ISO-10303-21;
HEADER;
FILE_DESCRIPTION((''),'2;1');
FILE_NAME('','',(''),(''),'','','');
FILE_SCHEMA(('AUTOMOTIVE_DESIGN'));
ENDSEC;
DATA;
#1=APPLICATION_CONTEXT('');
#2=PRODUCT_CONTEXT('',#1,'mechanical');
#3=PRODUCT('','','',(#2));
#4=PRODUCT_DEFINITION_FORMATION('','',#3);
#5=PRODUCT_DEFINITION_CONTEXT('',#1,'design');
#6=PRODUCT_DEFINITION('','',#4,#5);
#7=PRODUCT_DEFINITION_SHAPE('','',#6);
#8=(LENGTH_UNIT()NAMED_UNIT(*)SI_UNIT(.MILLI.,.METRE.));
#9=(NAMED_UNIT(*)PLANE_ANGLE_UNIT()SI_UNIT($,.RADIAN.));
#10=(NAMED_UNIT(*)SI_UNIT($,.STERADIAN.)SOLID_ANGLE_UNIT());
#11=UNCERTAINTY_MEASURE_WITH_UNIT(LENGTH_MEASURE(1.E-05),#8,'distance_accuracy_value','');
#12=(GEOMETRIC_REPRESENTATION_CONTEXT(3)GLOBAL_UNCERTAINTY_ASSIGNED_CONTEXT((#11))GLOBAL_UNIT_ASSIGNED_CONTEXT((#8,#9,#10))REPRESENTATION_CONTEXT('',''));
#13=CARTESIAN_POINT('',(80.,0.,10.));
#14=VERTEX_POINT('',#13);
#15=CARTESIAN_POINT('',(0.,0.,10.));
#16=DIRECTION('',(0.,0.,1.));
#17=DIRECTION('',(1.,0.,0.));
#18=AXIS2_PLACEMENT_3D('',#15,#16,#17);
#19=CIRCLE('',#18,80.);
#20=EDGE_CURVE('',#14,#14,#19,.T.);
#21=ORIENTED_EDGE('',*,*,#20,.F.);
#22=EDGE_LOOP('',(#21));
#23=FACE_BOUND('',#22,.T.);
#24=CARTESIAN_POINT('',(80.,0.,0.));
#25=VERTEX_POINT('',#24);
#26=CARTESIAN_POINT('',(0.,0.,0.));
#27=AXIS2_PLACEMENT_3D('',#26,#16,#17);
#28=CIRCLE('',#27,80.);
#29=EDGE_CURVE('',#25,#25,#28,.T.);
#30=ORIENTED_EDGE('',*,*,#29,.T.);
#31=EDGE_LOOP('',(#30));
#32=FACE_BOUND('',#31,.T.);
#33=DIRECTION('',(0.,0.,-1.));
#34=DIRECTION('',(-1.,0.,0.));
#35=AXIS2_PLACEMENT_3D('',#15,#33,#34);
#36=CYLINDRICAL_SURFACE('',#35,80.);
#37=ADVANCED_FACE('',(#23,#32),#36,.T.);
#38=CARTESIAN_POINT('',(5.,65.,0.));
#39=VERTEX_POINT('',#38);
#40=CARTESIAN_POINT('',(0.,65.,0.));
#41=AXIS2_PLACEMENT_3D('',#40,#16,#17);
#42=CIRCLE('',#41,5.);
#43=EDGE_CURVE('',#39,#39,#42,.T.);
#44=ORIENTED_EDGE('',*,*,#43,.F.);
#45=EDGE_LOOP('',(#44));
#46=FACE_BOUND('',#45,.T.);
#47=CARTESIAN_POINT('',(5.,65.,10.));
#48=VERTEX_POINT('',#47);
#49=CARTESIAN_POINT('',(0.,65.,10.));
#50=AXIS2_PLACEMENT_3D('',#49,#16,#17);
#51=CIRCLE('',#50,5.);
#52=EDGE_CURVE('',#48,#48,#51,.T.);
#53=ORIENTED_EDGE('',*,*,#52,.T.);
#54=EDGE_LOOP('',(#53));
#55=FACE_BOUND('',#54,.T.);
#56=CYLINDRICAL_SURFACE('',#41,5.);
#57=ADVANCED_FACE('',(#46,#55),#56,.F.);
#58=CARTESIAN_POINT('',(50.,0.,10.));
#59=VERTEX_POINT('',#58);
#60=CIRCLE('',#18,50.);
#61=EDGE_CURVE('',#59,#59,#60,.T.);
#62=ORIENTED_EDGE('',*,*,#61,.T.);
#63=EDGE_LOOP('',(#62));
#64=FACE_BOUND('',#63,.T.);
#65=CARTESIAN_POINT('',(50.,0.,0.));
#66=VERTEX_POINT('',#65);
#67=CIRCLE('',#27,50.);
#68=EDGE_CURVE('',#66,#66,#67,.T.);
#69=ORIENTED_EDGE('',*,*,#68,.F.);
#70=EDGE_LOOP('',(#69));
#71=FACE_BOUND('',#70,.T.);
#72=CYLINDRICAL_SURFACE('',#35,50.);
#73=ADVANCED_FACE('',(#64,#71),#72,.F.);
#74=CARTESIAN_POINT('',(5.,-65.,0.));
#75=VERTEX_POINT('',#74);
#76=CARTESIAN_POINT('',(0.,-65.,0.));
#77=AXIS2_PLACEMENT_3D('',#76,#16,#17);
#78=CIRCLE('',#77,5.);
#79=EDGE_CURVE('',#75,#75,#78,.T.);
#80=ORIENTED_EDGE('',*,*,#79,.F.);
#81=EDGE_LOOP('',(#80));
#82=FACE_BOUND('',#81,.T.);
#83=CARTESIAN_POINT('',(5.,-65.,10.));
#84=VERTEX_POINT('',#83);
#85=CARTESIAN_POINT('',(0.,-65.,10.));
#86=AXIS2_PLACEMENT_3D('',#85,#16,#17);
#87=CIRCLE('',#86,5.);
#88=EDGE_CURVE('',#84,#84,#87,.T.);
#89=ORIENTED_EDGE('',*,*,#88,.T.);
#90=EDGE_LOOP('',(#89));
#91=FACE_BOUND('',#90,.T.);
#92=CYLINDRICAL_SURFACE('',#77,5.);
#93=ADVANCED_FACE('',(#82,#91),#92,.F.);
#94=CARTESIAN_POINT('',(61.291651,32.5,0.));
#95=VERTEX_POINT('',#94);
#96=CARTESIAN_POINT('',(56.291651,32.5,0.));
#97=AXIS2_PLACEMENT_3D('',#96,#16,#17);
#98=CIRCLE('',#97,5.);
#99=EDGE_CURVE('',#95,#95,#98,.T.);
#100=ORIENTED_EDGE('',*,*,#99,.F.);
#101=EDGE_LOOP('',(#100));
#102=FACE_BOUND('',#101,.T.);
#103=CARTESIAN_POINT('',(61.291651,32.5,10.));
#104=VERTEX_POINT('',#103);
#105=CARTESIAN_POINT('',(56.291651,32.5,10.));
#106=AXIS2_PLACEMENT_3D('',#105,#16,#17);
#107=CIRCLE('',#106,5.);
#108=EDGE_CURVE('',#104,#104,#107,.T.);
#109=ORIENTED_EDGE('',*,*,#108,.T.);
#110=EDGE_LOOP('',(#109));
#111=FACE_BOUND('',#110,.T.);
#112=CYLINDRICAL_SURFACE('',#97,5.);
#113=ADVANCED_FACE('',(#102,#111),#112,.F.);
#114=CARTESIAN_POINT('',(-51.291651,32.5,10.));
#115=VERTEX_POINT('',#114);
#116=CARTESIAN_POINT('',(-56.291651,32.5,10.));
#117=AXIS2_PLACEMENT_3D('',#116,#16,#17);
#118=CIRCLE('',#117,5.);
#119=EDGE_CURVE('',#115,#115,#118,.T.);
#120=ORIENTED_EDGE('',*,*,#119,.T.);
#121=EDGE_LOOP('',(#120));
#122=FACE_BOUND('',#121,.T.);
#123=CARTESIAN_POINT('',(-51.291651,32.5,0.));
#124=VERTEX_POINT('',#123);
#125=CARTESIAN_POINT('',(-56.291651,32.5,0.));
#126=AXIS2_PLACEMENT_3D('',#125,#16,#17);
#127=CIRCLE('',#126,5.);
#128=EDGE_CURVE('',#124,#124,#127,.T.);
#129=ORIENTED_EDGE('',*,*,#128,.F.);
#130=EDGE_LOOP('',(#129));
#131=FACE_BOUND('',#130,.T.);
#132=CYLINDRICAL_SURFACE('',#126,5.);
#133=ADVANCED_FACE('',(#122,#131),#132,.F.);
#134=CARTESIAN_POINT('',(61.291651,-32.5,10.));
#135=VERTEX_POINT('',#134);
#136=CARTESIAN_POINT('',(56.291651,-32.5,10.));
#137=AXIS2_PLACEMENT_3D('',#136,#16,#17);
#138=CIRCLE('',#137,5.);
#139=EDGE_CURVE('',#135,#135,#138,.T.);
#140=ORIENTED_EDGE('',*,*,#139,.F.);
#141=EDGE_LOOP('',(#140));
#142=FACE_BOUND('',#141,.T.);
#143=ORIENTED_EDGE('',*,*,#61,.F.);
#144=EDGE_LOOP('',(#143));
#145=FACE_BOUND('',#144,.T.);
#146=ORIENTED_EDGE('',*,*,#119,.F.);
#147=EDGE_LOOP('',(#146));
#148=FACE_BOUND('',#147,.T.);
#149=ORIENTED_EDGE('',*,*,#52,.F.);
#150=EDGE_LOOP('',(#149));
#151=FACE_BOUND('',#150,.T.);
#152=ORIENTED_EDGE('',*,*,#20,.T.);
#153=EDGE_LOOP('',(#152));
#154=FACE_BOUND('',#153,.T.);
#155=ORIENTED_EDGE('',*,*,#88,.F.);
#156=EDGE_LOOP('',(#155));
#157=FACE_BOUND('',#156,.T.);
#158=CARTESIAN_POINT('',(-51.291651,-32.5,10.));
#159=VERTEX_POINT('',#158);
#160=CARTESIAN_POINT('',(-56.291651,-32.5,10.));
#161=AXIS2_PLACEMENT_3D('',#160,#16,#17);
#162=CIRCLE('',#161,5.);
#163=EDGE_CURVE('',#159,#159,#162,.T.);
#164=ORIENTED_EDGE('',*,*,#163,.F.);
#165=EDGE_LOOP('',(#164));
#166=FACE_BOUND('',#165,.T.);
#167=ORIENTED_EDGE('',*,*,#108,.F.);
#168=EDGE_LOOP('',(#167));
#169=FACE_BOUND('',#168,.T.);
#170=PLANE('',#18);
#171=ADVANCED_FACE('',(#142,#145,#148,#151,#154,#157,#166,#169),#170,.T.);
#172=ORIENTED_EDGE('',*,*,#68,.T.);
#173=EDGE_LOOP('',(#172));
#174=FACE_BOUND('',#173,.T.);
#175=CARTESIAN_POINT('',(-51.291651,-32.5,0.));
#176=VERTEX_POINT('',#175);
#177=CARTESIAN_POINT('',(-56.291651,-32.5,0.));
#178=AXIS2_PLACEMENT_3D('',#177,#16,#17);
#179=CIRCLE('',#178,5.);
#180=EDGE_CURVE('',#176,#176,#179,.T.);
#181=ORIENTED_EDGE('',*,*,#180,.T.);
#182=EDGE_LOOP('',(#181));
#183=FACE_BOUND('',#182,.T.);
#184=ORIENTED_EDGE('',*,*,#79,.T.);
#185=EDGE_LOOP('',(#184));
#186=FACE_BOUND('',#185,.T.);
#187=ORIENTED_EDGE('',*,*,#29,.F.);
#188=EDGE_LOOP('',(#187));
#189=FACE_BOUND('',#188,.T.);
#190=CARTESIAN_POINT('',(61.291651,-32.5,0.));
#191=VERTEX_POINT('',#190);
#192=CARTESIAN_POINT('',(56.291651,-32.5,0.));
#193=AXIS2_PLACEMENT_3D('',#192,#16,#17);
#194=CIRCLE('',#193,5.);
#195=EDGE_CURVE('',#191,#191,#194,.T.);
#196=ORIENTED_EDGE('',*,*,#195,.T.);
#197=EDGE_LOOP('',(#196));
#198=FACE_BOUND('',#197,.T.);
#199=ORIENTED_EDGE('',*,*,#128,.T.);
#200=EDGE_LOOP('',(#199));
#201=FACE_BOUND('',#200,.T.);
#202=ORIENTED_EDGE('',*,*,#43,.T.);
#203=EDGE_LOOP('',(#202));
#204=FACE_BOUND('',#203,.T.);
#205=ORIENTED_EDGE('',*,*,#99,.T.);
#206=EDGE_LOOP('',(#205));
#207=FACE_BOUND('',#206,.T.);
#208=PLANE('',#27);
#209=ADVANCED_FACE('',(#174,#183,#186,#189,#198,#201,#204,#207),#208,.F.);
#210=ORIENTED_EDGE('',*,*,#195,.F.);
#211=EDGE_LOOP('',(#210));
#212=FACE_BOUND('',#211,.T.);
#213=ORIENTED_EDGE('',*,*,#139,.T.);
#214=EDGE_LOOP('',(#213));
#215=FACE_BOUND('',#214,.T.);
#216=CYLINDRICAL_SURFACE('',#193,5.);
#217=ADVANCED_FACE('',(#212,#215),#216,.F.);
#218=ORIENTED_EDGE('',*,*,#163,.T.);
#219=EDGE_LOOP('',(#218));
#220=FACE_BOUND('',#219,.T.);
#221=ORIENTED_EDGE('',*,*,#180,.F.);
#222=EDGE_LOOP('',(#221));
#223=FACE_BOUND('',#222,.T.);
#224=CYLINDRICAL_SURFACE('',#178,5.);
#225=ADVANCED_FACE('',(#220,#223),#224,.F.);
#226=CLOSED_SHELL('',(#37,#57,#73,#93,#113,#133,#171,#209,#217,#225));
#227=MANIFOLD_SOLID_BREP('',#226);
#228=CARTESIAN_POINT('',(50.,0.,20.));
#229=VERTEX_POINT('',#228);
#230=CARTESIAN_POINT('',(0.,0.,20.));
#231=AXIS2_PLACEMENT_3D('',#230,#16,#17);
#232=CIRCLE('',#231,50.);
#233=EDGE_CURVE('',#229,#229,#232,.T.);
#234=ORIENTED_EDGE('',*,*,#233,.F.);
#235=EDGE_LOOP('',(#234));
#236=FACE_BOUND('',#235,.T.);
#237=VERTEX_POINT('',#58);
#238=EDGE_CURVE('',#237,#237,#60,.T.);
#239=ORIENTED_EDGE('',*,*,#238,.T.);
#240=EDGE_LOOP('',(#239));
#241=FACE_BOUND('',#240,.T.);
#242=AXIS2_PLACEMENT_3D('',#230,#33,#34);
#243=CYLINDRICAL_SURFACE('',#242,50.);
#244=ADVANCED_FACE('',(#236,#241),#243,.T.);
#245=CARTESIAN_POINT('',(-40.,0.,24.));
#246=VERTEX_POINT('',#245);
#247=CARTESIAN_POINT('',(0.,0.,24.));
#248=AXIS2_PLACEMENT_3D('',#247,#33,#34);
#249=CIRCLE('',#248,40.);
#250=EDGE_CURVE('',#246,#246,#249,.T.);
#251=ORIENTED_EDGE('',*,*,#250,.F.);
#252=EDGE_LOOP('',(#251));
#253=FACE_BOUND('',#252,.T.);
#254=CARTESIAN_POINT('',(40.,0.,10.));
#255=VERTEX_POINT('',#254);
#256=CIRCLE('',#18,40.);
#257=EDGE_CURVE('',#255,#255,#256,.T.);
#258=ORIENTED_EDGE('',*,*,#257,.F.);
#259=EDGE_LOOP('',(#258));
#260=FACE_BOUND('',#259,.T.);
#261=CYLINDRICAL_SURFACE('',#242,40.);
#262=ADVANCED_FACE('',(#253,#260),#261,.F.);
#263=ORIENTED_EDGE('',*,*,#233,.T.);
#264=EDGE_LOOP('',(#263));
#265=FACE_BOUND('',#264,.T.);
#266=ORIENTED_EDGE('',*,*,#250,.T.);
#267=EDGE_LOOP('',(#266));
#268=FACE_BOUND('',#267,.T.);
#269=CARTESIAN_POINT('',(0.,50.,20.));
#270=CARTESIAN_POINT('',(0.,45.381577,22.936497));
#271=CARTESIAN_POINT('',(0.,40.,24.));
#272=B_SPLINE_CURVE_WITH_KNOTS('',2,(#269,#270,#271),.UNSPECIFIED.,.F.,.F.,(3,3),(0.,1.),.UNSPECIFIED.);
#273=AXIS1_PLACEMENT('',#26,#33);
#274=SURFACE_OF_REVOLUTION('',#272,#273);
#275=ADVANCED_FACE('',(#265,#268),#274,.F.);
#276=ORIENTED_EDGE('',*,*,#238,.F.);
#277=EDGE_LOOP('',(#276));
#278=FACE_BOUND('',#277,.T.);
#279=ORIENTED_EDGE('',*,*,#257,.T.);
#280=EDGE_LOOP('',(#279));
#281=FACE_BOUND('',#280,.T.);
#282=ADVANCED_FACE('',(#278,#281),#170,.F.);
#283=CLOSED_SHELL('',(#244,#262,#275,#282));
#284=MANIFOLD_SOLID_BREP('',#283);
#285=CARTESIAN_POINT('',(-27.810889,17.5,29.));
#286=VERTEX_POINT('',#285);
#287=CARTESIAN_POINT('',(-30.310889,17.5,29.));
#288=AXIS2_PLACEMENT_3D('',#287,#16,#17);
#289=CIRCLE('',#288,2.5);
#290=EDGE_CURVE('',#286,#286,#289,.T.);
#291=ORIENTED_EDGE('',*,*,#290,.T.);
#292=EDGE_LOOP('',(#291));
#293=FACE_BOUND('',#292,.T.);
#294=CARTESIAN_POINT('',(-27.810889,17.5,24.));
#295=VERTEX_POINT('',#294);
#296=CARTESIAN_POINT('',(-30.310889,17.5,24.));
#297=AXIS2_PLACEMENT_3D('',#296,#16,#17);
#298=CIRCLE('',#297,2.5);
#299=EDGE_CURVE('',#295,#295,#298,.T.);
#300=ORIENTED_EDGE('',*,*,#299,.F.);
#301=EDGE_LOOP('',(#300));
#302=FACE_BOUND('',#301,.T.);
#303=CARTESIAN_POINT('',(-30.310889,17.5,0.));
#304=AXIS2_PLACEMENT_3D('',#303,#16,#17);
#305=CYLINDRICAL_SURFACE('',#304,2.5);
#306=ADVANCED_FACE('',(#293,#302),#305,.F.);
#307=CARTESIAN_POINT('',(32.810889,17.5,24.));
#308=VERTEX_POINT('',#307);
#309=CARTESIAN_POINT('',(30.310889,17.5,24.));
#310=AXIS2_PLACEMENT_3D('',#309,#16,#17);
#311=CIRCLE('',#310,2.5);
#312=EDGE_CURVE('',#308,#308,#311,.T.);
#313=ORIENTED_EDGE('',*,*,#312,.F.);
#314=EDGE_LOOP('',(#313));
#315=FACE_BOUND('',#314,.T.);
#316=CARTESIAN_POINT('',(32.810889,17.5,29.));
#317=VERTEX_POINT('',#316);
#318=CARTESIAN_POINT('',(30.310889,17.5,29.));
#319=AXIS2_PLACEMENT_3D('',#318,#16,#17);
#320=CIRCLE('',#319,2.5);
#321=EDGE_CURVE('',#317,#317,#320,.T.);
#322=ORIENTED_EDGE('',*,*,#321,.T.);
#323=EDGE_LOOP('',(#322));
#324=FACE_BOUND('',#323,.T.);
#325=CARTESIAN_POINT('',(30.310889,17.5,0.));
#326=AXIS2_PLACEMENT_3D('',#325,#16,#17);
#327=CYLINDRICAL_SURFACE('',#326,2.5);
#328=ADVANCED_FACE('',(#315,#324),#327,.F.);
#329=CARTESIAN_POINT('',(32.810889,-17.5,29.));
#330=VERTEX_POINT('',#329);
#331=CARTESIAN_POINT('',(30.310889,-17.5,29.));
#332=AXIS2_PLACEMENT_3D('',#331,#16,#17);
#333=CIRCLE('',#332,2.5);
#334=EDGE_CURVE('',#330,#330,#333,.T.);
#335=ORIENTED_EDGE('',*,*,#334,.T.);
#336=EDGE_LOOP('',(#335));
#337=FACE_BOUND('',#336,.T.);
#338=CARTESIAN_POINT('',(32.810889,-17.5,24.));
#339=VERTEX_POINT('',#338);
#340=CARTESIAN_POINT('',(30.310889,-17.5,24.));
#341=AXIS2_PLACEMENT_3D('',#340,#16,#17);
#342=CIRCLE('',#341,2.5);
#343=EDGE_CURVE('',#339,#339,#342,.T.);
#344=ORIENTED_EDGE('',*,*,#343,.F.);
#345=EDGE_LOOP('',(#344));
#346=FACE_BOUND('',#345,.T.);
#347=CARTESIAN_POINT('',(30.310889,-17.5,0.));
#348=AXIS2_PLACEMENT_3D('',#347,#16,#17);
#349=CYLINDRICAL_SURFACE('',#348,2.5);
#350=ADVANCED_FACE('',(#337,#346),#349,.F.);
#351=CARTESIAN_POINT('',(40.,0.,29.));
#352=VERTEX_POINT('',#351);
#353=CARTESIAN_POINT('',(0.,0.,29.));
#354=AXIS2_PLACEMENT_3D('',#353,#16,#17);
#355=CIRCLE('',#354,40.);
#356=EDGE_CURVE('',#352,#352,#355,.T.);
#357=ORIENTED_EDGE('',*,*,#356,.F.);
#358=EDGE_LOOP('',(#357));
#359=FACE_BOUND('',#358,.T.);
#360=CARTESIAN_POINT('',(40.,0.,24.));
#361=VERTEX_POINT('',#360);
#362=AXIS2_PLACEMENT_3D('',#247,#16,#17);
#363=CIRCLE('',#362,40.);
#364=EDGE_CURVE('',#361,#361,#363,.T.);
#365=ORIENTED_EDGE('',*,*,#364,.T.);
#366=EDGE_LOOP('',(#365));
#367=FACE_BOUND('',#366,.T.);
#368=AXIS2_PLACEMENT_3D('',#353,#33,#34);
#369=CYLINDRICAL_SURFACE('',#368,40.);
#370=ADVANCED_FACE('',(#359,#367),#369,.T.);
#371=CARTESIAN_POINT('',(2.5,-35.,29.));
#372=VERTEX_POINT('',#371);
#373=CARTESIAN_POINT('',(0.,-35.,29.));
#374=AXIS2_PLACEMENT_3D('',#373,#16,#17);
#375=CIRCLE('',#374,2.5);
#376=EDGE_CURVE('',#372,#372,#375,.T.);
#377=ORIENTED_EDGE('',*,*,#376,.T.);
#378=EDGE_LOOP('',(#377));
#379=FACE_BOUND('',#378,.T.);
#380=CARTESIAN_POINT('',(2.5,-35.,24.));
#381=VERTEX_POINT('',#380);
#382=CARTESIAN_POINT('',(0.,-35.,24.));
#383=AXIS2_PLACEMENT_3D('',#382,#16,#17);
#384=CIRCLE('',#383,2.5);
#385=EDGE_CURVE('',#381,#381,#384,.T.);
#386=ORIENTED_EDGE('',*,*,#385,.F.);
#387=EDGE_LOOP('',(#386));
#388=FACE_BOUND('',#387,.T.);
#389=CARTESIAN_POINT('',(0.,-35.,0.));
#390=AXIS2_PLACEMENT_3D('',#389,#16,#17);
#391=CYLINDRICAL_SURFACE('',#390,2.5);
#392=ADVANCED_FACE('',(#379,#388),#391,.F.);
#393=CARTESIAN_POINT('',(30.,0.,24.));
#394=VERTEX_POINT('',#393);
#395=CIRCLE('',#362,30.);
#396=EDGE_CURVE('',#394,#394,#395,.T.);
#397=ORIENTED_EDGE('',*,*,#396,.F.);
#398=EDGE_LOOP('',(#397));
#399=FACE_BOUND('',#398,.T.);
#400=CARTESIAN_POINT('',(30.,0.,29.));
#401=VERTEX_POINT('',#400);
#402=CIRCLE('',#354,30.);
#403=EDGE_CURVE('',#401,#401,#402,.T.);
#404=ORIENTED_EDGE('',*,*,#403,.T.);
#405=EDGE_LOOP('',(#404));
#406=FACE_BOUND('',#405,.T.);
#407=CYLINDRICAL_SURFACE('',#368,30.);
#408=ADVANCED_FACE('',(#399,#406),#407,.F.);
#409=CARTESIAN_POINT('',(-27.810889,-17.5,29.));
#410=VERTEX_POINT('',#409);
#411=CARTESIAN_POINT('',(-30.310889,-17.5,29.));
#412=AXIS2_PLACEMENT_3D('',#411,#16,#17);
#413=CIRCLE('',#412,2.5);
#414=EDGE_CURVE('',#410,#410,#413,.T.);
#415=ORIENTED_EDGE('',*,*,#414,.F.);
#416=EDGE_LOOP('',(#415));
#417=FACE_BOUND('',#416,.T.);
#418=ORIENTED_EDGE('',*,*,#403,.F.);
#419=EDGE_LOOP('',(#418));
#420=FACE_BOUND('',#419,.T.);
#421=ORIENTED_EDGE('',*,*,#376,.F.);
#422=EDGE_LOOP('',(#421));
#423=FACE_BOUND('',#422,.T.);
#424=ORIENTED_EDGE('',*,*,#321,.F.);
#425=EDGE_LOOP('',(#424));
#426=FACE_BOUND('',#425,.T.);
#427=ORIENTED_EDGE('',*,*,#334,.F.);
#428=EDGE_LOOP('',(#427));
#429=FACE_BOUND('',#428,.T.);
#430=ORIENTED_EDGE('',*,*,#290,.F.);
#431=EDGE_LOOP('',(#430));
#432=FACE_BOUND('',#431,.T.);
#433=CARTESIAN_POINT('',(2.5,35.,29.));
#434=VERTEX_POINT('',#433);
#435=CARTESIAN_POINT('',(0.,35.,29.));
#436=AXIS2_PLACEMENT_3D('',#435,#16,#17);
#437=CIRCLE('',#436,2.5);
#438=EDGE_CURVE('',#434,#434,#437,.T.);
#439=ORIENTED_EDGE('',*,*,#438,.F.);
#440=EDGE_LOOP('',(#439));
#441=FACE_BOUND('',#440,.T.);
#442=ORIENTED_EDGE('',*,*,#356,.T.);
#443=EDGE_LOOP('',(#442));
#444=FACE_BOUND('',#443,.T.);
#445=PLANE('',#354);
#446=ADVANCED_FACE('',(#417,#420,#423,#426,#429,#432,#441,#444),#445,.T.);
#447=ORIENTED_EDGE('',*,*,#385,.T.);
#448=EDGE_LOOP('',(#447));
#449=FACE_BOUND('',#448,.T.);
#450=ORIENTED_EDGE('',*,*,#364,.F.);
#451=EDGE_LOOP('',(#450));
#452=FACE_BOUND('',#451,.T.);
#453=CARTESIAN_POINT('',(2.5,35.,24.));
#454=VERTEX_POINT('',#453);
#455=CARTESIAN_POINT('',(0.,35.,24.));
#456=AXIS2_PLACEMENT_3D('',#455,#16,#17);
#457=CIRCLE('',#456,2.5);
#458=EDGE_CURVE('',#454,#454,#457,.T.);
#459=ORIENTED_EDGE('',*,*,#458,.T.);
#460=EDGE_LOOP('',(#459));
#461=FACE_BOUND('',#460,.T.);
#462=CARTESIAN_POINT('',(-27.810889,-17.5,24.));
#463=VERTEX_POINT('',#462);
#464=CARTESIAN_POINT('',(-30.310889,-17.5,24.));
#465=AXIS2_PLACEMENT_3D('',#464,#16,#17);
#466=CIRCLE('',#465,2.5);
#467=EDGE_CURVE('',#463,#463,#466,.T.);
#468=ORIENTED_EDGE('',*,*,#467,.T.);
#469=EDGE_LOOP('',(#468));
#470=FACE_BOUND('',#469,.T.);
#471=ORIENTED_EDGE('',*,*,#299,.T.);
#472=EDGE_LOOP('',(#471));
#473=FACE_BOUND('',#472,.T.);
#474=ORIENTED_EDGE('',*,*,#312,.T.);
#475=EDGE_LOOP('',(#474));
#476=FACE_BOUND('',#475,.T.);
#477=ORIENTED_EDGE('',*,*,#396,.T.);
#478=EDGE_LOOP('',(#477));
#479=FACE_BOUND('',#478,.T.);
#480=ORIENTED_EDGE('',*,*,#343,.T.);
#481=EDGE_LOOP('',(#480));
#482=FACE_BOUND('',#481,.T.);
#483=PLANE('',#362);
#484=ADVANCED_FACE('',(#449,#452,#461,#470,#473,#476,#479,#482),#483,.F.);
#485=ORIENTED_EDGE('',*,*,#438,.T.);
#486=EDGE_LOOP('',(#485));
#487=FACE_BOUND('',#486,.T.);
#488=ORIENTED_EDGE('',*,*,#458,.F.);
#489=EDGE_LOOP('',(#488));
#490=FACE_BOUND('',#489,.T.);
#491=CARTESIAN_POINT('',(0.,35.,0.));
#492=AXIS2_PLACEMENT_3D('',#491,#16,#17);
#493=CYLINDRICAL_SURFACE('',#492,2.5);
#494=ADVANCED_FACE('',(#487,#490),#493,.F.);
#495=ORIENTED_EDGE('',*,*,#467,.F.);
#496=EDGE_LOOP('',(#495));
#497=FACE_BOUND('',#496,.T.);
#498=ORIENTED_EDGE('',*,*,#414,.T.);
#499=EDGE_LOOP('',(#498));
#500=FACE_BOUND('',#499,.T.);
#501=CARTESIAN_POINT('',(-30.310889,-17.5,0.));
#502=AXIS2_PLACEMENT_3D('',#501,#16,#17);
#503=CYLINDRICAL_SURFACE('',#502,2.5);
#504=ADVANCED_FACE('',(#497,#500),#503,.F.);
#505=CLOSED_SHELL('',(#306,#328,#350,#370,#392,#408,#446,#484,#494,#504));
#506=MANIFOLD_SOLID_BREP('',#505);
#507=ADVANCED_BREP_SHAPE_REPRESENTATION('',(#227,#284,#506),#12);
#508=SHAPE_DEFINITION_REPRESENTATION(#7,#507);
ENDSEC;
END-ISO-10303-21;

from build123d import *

# Parameters (mm, degrees)
SKETCH1_R           = 80
SKETCH1_R_2         = 50
EXTRUDE_THIN1_DEPTH = 10
SKETCH2_R           = 5
CUT_EXTRUDE1_DEPTH  = 114.578166916
SKETCH3_R           = 50
SKETCH3_R_2         = 40
EXTRUDE_THIN2_DEPTH = 10
SKETCH7_R           = 40
SKETCH7_R_2         = 30
EXTRUDE_THIN3_DEPTH = 5
SKETCH8_R           = 2.5
CUT_EXTRUDE2_DEPTH  = 117.79469166


with BuildPart() as part:
    # Sketch1 → Extrude-Thin1 (new body)
    with BuildSketch(Plane.XY):
        Circle(SKETCH1_R)
        Circle(SKETCH1_R_2, mode=Mode.SUBTRACT)
    extrude(amount=EXTRUDE_THIN1_DEPTH)

    # Sketch2 → Cut-Extrude1 (cut, through all)
    with BuildSketch(Plane.XY.offset(10)):
        with Locations((0, 65)):
            Circle(SKETCH2_R)
        with Locations((56.291651246, 32.5)):
            Circle(SKETCH2_R)
        with Locations((56.291651246, -32.5)):
            Circle(SKETCH2_R)
        with Locations((0, -65)):
            Circle(SKETCH2_R)
        with Locations((-56.291651246, -32.5)):
            Circle(SKETCH2_R)
        with Locations((-56.291651246, 32.5)):
            Circle(SKETCH2_R)
    extrude(amount=-CUT_EXTRUDE1_DEPTH, mode=Mode.SUBTRACT)


with BuildPart() as body_2:
    # Sketch3 → Extrude-Thin2 (new body)
    with BuildSketch(Plane.XY.offset(10)):
        Circle(SKETCH3_R)
        Circle(SKETCH3_R_2, mode=Mode.SUBTRACT)
    extrude(amount=EXTRUDE_THIN2_DEPTH)

    # Sketch4 → Revolve1 (revolve)
    with BuildSketch(Plane(origin=(0, 0, 0), x_dir=(0, 0, -1), z_dir=(1, 0, 0))):
        with BuildLine():
            Line((-24, 40), (-20, 40))
            Line((-20, 40), (-20, 50))
            add(Edge.make_bspline(
                [(-20, 50), (-22.936497208, 45.381576701), (-24, 40)],
                knots=[0, 0, 0, 1, 1, 1], degree=2))
        make_face()
    revolve(axis=Axis((0, 0, 0), (0, 0, 1)))


with BuildPart() as body_3:
    # Sketch7 → Extrude-Thin3 (new body)
    with BuildSketch(Plane.XY.offset(24)):
        Circle(SKETCH7_R)
        Circle(SKETCH7_R_2, mode=Mode.SUBTRACT)
    extrude(amount=EXTRUDE_THIN3_DEPTH)

    # Sketch8 → Cut-Extrude2 (cut, through all)
    with BuildSketch(Plane.XY.offset(29)):
        with Locations((0, 35)):
            Circle(SKETCH8_R)
        with Locations((30.310889132, 17.5)):
            Circle(SKETCH8_R)
        with Locations((30.310889132, -17.5)):
            Circle(SKETCH8_R)
        with Locations((0, -35)):
            Circle(SKETCH8_R)
        with Locations((-30.310889132, -17.5)):
            Circle(SKETCH8_R)
        with Locations((-30.310889132, 17.5)):
            Circle(SKETCH8_R)
    extrude(amount=-CUT_EXTRUDE2_DEPTH, mode=Mode.SUBTRACT)


solid = Compound([part.part, body_2.part, body_3.part])
